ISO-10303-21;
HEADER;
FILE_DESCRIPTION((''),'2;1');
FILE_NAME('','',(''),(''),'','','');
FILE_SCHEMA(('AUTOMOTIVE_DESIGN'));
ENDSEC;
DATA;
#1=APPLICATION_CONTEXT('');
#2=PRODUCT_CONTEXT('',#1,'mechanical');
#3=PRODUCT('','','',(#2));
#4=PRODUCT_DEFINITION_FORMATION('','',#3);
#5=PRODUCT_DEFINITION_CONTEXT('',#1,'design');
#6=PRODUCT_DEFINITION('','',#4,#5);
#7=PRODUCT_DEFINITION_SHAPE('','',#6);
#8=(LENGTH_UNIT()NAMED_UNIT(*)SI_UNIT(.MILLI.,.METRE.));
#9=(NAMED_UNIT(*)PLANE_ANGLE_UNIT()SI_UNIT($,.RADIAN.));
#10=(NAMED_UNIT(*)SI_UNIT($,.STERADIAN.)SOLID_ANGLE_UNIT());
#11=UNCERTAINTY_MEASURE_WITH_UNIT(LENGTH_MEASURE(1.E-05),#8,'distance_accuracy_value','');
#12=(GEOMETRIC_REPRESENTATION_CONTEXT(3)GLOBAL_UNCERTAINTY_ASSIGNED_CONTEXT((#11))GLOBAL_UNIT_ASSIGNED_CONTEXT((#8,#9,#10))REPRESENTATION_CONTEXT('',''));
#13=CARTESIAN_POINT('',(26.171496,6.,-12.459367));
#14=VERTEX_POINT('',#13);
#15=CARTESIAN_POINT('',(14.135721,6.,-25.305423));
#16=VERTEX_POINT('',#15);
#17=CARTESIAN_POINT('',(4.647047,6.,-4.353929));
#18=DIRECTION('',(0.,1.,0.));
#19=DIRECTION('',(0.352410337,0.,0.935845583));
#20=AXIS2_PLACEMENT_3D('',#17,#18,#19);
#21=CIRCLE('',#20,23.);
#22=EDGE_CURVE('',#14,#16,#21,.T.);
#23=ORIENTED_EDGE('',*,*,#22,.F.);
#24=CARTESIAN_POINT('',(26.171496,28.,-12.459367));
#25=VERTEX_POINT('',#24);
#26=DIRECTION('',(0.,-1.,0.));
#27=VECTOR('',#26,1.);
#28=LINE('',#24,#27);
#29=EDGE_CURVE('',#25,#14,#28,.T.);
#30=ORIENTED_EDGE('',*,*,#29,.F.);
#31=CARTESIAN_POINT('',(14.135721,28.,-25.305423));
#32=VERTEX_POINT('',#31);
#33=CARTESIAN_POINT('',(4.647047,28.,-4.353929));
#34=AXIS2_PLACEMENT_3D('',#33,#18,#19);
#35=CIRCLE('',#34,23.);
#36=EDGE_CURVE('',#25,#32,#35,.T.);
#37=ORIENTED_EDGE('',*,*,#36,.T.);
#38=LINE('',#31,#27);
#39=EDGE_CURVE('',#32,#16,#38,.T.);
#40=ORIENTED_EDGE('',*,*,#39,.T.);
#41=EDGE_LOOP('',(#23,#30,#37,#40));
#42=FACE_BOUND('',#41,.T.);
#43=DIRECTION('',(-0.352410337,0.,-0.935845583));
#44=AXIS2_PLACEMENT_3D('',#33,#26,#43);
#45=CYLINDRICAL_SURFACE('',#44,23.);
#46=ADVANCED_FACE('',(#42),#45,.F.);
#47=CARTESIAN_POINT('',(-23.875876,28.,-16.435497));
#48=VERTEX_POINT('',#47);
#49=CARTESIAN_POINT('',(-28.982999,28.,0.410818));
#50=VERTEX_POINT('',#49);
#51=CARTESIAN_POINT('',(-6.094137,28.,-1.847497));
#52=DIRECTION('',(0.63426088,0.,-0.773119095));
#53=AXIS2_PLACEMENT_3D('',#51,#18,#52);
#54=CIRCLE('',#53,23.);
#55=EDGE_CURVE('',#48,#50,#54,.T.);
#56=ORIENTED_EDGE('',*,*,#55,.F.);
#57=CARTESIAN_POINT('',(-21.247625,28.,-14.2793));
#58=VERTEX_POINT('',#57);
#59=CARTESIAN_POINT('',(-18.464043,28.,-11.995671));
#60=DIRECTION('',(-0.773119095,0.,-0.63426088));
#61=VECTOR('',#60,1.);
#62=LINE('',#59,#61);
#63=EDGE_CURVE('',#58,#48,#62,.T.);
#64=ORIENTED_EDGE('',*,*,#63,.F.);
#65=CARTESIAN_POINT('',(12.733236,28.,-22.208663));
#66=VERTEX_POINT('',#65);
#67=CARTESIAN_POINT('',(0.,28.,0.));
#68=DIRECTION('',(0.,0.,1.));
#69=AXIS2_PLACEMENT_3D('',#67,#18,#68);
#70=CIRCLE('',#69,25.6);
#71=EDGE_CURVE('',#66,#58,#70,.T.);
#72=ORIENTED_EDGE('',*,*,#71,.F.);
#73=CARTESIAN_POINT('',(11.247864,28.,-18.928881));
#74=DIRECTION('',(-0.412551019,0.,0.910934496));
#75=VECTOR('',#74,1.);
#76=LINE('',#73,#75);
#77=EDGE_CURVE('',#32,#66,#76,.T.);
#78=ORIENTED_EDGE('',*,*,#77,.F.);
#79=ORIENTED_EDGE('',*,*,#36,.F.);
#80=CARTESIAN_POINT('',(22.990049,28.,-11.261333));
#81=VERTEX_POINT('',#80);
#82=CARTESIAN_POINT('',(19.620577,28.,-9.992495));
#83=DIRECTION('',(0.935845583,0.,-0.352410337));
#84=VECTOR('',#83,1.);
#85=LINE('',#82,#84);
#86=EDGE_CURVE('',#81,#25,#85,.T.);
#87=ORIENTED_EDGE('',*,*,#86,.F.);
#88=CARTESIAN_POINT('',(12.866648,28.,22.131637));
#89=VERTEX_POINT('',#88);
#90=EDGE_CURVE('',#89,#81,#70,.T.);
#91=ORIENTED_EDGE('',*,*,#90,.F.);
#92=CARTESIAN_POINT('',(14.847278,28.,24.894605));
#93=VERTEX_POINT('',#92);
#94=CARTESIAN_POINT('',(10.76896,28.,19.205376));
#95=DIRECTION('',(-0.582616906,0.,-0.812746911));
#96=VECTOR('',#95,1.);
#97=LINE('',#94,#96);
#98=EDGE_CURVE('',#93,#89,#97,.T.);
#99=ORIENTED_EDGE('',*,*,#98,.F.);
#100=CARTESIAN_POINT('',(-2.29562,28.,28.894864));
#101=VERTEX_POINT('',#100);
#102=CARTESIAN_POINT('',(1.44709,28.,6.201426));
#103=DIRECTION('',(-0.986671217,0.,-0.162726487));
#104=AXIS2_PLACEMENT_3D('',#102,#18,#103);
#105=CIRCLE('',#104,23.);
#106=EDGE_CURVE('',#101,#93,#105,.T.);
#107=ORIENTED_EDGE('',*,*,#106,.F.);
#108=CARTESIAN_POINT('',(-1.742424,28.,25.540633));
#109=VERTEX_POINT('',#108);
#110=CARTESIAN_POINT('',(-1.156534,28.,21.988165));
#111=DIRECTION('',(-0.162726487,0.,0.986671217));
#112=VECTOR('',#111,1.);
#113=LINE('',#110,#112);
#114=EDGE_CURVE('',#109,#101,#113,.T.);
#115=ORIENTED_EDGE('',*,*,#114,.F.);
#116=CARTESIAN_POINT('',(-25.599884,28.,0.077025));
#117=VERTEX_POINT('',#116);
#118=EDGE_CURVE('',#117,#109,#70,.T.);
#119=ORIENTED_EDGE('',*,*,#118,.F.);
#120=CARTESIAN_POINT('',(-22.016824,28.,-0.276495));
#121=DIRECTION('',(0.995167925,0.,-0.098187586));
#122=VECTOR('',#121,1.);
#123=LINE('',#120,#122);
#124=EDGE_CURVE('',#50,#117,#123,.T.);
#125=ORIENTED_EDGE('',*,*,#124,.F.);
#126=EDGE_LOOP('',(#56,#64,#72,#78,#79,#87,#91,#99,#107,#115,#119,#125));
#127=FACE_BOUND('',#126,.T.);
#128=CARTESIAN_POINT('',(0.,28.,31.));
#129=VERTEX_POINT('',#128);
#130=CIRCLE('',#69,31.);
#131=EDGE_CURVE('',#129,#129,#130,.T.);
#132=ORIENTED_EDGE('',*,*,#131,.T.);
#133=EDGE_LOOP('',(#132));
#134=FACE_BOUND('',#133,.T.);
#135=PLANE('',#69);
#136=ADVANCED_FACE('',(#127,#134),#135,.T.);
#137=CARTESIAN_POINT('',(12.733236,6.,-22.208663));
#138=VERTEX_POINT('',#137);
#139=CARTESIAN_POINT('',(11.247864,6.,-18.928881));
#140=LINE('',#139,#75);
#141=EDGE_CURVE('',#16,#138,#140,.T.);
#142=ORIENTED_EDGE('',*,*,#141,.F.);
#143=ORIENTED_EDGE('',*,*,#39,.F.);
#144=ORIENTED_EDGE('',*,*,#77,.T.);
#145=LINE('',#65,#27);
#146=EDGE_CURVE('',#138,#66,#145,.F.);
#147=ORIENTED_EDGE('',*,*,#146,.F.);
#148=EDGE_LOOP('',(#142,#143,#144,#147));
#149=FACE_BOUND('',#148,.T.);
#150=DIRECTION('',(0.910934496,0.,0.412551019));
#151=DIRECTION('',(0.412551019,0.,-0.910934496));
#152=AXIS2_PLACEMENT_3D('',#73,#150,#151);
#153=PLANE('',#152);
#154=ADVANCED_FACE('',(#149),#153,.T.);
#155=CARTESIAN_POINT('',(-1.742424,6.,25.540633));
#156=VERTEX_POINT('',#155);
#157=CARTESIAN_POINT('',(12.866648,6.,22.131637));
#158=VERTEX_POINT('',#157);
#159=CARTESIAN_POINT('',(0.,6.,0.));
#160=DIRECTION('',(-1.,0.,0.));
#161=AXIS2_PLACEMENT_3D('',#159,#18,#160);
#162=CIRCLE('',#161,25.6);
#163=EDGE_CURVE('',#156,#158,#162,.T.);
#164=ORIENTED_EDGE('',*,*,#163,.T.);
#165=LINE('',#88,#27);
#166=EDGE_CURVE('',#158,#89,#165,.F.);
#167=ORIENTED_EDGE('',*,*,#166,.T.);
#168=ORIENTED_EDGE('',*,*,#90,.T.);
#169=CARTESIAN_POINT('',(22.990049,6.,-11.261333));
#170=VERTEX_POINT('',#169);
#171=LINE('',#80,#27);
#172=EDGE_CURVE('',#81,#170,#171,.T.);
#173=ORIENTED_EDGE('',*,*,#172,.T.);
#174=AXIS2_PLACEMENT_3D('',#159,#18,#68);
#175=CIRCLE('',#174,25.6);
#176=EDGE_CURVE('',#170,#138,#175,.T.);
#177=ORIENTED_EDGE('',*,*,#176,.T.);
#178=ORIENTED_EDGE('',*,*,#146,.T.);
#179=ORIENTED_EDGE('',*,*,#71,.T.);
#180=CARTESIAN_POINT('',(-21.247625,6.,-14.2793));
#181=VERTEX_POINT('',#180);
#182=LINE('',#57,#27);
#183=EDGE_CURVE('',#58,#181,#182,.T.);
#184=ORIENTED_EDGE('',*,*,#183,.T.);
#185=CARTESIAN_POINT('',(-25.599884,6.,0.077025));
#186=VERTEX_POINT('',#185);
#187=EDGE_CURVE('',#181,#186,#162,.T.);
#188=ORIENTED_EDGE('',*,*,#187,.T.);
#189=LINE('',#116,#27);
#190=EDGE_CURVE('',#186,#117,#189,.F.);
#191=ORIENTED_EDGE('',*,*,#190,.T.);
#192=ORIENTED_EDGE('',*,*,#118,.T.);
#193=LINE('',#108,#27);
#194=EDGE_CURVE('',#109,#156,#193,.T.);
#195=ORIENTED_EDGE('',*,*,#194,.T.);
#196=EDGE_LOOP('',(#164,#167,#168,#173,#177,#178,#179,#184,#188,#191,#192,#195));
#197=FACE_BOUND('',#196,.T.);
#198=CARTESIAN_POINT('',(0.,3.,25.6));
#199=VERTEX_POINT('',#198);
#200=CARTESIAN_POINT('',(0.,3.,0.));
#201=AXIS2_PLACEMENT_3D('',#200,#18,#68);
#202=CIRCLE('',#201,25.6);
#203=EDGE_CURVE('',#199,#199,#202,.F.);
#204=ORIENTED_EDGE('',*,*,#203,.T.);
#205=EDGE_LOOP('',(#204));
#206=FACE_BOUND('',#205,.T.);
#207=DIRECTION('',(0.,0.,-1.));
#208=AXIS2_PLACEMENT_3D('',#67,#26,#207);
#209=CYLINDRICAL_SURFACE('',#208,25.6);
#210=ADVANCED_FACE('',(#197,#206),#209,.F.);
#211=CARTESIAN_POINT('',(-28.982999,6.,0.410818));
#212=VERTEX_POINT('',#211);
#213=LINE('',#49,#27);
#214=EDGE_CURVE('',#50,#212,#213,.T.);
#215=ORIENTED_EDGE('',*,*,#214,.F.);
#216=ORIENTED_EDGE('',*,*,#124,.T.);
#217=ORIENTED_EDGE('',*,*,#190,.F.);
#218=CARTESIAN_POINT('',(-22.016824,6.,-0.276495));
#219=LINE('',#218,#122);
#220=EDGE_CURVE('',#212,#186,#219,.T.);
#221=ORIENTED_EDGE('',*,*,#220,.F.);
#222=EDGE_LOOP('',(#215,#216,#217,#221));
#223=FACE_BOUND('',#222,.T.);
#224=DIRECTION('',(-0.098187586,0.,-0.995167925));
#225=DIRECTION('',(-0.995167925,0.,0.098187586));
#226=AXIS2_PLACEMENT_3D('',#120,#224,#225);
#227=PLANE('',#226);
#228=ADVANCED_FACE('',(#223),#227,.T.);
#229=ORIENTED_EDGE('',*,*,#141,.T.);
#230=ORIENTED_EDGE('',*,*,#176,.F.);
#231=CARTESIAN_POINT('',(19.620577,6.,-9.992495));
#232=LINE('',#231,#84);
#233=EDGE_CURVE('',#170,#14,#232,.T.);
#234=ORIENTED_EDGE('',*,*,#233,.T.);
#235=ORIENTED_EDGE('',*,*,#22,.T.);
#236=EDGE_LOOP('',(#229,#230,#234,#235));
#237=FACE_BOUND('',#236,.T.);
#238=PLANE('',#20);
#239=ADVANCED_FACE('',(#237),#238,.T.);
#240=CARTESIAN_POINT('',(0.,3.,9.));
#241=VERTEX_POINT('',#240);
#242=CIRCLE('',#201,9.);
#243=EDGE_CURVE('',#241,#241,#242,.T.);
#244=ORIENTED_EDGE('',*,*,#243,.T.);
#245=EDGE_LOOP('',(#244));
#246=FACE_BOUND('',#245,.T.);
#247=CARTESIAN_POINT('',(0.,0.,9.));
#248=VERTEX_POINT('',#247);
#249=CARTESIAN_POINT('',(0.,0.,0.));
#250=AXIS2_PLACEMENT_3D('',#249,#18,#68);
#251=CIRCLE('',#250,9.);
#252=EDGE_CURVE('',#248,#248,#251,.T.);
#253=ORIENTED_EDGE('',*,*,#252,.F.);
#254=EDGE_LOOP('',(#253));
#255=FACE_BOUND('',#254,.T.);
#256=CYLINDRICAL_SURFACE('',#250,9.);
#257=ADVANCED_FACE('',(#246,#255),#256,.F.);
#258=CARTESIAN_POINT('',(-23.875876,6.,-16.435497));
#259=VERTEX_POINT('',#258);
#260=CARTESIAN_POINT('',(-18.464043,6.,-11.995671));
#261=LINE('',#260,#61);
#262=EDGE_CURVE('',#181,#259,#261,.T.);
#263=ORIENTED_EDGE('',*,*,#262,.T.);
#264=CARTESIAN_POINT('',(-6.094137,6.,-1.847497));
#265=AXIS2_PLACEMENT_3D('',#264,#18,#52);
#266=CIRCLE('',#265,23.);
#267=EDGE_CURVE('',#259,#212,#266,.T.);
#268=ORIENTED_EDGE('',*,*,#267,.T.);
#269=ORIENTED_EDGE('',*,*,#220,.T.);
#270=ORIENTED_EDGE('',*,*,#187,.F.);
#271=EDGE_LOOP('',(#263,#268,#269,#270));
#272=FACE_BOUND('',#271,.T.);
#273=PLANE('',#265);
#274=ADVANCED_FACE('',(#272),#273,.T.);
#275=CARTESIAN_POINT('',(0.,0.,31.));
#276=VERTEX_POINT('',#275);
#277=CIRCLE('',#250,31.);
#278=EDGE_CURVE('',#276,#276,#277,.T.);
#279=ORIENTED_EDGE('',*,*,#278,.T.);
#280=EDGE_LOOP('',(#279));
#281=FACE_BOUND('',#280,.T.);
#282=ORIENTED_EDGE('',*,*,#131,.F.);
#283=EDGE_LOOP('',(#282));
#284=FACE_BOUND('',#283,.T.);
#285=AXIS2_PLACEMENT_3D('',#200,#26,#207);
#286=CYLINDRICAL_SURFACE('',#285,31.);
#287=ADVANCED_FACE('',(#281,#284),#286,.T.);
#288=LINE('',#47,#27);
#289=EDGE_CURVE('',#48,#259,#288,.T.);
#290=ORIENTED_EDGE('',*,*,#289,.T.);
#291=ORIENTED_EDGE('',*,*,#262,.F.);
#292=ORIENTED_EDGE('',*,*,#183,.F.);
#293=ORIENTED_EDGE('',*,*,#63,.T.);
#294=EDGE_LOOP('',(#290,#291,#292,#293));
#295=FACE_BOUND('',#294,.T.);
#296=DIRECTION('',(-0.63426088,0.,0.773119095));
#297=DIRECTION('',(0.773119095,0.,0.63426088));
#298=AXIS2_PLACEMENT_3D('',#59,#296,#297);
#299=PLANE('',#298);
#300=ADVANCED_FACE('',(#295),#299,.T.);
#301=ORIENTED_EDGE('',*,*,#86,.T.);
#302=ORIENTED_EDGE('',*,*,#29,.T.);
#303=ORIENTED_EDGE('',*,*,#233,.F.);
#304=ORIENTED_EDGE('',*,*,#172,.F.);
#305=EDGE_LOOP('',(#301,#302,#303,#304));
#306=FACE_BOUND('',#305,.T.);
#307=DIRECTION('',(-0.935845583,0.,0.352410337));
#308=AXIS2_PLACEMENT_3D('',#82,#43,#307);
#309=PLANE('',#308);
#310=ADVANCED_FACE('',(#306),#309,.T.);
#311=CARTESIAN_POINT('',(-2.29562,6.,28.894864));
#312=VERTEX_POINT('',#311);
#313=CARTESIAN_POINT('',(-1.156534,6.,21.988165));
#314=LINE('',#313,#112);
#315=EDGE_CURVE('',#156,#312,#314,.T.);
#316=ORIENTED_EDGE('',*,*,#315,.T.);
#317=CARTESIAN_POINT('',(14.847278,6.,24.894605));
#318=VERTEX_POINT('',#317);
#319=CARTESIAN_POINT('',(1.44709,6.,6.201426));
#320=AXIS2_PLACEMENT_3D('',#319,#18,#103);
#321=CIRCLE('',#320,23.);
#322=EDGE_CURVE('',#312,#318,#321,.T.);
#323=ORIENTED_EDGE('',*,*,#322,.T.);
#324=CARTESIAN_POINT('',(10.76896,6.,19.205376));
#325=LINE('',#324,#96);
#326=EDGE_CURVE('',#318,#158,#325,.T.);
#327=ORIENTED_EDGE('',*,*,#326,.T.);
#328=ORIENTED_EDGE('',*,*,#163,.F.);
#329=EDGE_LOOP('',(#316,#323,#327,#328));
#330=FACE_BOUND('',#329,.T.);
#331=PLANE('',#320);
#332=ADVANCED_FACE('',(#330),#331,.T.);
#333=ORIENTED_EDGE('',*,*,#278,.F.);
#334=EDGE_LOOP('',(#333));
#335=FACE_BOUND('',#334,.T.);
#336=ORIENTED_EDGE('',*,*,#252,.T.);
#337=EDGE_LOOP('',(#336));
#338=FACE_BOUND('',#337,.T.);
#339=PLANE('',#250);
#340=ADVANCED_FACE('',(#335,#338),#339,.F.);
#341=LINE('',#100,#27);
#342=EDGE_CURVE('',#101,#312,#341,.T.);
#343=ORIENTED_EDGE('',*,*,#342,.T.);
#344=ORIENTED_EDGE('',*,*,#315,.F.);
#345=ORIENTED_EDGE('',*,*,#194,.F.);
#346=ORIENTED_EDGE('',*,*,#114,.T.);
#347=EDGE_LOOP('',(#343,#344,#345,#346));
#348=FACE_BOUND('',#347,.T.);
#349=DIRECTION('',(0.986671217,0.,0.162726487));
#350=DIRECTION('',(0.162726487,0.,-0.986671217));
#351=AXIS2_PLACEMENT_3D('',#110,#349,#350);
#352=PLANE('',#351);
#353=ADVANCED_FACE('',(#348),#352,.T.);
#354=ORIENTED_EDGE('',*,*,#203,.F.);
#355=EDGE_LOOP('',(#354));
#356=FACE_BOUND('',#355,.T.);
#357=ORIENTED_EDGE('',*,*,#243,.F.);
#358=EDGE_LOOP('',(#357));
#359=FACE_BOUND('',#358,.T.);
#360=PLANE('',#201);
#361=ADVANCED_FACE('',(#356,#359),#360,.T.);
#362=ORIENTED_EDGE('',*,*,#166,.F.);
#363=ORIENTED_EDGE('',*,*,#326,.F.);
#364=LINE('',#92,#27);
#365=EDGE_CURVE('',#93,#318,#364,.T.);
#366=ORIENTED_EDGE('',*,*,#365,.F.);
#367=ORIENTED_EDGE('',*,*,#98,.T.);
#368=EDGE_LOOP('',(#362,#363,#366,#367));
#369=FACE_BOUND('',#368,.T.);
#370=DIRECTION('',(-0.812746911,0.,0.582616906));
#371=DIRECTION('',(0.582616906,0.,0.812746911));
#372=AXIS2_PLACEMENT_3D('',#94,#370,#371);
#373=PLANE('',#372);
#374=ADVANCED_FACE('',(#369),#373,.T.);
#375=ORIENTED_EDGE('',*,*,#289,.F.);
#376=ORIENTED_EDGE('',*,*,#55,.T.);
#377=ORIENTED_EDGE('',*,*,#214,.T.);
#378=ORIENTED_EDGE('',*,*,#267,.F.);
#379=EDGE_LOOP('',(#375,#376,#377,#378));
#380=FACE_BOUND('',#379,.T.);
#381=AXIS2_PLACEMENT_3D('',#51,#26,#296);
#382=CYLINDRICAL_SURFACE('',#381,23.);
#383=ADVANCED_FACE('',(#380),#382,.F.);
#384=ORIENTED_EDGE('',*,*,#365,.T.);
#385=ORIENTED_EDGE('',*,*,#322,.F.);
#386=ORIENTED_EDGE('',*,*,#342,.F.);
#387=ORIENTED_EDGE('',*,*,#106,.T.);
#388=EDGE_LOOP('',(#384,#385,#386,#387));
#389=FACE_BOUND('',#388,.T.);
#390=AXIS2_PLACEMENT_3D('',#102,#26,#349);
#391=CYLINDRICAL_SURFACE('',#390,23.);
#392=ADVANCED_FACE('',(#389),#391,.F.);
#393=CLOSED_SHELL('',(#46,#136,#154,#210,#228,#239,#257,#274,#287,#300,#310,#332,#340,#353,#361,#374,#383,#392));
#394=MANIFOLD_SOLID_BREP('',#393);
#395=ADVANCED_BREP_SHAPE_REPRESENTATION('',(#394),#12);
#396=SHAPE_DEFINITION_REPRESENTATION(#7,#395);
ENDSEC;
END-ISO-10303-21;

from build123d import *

# Parameters (mm, degrees)
SKETCH1_R           = 31
BOSS_EXTRUDE1_DEPTH = 3
SKETCH2_R           = 31
SKETCH2_R_2         = 25.6
BOSS_EXTRUDE2_DEPTH = 25
SKETCH4_R           = 9
CUT_EXTRUDE1_DEPTH  = 51.467811524
CAVITY1_START       = 6
CAVITY1_DEPTH       = 22


# Read off the part's stored shape, not the designer's step: Cavity1
with BuildPart() as part:
    # Sketch1 → Boss-Extrude1 (new body)
    with BuildSketch(Plane(origin=(0, 0, 0), x_dir=(1, 0, 0), z_dir=(0, 1, 0))):
        with Locations(Location((0, 0, 0), (0, 0, 270))):
            Circle(SKETCH1_R)
    extrude(amount=BOSS_EXTRUDE1_DEPTH)

    # Sketch2 → Boss-Extrude2 (add)
    with BuildSketch(Plane(origin=(0, 3, 0), x_dir=(1, 0, 0), z_dir=(0, 1, 0))):
        with Locations(Location((0, 0, 0), (0, 0, 270))):
            Circle(SKETCH2_R)
        with Locations(Location((0, 0, 0), (0, 0, 270))):
            Circle(SKETCH2_R_2, mode=Mode.SUBTRACT)
    extrude(amount=BOSS_EXTRUDE2_DEPTH)

    # Sketch4 → Cut-Extrude1 (cut, through all)
    with BuildSketch(Plane(origin=(0, 3, 0), x_dir=(1, 0, 0), z_dir=(0, 1, 0))):
        with Locations(Location((0, 0, 0), (0, 0, 270))):
            Circle(SKETCH4_R)
    extrude(amount=-CUT_EXTRUDE1_DEPTH, mode=Mode.SUBTRACT)

    # Cavity1 outline → Cavity1 (cut)
    with BuildSketch(Plane(origin=(0, 0, 0), x_dir=(1, 0, 0), z_dir=(0, 1, 0)).offset(CAVITY1_START)):
        with BuildLine():
            ThreePointArc((-2.295619613, -28.894863729), (6.673679903, -28.599701426), (14.847278424, -24.894604691))
            Line((14.847278424, -24.894604691), (12.866647777, -22.131637422))
            ThreePointArc((12.866647777, -22.131637422), (5.817422257, -24.930254677), (-1.742424083, -25.540633475))
            Line((-1.742424083, -25.540633475), (-2.295619613, -28.894863729))
        make_face()
        with BuildLine():
            Line((-28.982999292, -0.410817947), (-25.599884123, -0.077025125))
            ThreePointArc((-25.599884123, -0.077025125), (-24.498945002, 7.427091879), (-21.247625377, 14.279300258))
            Line((-21.247625377, 14.279300258), (-23.875876221, 16.435496767))
            ThreePointArc((-23.875876221, 16.435496767), (-28.104907927, 8.52027438), (-28.982999292, -0.410817947))
        make_face()
        with BuildLine():
            ThreePointArc((12.733236347, 22.208662547), (18.681522745, 17.503162798), (22.99004946, 11.261333217))
            Line((22.99004946, 11.261333217), (26.171495835, 12.459366962))
            ThreePointArc((26.171495835, 12.459366962), (21.431228024, 20.079427046), (14.135720867, 25.305422638))
            Line((14.135720867, 25.305422638), (12.733236347, 22.208662547))
        make_face()
    extrude(amount=CAVITY1_DEPTH, mode=Mode.SUBTRACT)


solid = part.part
